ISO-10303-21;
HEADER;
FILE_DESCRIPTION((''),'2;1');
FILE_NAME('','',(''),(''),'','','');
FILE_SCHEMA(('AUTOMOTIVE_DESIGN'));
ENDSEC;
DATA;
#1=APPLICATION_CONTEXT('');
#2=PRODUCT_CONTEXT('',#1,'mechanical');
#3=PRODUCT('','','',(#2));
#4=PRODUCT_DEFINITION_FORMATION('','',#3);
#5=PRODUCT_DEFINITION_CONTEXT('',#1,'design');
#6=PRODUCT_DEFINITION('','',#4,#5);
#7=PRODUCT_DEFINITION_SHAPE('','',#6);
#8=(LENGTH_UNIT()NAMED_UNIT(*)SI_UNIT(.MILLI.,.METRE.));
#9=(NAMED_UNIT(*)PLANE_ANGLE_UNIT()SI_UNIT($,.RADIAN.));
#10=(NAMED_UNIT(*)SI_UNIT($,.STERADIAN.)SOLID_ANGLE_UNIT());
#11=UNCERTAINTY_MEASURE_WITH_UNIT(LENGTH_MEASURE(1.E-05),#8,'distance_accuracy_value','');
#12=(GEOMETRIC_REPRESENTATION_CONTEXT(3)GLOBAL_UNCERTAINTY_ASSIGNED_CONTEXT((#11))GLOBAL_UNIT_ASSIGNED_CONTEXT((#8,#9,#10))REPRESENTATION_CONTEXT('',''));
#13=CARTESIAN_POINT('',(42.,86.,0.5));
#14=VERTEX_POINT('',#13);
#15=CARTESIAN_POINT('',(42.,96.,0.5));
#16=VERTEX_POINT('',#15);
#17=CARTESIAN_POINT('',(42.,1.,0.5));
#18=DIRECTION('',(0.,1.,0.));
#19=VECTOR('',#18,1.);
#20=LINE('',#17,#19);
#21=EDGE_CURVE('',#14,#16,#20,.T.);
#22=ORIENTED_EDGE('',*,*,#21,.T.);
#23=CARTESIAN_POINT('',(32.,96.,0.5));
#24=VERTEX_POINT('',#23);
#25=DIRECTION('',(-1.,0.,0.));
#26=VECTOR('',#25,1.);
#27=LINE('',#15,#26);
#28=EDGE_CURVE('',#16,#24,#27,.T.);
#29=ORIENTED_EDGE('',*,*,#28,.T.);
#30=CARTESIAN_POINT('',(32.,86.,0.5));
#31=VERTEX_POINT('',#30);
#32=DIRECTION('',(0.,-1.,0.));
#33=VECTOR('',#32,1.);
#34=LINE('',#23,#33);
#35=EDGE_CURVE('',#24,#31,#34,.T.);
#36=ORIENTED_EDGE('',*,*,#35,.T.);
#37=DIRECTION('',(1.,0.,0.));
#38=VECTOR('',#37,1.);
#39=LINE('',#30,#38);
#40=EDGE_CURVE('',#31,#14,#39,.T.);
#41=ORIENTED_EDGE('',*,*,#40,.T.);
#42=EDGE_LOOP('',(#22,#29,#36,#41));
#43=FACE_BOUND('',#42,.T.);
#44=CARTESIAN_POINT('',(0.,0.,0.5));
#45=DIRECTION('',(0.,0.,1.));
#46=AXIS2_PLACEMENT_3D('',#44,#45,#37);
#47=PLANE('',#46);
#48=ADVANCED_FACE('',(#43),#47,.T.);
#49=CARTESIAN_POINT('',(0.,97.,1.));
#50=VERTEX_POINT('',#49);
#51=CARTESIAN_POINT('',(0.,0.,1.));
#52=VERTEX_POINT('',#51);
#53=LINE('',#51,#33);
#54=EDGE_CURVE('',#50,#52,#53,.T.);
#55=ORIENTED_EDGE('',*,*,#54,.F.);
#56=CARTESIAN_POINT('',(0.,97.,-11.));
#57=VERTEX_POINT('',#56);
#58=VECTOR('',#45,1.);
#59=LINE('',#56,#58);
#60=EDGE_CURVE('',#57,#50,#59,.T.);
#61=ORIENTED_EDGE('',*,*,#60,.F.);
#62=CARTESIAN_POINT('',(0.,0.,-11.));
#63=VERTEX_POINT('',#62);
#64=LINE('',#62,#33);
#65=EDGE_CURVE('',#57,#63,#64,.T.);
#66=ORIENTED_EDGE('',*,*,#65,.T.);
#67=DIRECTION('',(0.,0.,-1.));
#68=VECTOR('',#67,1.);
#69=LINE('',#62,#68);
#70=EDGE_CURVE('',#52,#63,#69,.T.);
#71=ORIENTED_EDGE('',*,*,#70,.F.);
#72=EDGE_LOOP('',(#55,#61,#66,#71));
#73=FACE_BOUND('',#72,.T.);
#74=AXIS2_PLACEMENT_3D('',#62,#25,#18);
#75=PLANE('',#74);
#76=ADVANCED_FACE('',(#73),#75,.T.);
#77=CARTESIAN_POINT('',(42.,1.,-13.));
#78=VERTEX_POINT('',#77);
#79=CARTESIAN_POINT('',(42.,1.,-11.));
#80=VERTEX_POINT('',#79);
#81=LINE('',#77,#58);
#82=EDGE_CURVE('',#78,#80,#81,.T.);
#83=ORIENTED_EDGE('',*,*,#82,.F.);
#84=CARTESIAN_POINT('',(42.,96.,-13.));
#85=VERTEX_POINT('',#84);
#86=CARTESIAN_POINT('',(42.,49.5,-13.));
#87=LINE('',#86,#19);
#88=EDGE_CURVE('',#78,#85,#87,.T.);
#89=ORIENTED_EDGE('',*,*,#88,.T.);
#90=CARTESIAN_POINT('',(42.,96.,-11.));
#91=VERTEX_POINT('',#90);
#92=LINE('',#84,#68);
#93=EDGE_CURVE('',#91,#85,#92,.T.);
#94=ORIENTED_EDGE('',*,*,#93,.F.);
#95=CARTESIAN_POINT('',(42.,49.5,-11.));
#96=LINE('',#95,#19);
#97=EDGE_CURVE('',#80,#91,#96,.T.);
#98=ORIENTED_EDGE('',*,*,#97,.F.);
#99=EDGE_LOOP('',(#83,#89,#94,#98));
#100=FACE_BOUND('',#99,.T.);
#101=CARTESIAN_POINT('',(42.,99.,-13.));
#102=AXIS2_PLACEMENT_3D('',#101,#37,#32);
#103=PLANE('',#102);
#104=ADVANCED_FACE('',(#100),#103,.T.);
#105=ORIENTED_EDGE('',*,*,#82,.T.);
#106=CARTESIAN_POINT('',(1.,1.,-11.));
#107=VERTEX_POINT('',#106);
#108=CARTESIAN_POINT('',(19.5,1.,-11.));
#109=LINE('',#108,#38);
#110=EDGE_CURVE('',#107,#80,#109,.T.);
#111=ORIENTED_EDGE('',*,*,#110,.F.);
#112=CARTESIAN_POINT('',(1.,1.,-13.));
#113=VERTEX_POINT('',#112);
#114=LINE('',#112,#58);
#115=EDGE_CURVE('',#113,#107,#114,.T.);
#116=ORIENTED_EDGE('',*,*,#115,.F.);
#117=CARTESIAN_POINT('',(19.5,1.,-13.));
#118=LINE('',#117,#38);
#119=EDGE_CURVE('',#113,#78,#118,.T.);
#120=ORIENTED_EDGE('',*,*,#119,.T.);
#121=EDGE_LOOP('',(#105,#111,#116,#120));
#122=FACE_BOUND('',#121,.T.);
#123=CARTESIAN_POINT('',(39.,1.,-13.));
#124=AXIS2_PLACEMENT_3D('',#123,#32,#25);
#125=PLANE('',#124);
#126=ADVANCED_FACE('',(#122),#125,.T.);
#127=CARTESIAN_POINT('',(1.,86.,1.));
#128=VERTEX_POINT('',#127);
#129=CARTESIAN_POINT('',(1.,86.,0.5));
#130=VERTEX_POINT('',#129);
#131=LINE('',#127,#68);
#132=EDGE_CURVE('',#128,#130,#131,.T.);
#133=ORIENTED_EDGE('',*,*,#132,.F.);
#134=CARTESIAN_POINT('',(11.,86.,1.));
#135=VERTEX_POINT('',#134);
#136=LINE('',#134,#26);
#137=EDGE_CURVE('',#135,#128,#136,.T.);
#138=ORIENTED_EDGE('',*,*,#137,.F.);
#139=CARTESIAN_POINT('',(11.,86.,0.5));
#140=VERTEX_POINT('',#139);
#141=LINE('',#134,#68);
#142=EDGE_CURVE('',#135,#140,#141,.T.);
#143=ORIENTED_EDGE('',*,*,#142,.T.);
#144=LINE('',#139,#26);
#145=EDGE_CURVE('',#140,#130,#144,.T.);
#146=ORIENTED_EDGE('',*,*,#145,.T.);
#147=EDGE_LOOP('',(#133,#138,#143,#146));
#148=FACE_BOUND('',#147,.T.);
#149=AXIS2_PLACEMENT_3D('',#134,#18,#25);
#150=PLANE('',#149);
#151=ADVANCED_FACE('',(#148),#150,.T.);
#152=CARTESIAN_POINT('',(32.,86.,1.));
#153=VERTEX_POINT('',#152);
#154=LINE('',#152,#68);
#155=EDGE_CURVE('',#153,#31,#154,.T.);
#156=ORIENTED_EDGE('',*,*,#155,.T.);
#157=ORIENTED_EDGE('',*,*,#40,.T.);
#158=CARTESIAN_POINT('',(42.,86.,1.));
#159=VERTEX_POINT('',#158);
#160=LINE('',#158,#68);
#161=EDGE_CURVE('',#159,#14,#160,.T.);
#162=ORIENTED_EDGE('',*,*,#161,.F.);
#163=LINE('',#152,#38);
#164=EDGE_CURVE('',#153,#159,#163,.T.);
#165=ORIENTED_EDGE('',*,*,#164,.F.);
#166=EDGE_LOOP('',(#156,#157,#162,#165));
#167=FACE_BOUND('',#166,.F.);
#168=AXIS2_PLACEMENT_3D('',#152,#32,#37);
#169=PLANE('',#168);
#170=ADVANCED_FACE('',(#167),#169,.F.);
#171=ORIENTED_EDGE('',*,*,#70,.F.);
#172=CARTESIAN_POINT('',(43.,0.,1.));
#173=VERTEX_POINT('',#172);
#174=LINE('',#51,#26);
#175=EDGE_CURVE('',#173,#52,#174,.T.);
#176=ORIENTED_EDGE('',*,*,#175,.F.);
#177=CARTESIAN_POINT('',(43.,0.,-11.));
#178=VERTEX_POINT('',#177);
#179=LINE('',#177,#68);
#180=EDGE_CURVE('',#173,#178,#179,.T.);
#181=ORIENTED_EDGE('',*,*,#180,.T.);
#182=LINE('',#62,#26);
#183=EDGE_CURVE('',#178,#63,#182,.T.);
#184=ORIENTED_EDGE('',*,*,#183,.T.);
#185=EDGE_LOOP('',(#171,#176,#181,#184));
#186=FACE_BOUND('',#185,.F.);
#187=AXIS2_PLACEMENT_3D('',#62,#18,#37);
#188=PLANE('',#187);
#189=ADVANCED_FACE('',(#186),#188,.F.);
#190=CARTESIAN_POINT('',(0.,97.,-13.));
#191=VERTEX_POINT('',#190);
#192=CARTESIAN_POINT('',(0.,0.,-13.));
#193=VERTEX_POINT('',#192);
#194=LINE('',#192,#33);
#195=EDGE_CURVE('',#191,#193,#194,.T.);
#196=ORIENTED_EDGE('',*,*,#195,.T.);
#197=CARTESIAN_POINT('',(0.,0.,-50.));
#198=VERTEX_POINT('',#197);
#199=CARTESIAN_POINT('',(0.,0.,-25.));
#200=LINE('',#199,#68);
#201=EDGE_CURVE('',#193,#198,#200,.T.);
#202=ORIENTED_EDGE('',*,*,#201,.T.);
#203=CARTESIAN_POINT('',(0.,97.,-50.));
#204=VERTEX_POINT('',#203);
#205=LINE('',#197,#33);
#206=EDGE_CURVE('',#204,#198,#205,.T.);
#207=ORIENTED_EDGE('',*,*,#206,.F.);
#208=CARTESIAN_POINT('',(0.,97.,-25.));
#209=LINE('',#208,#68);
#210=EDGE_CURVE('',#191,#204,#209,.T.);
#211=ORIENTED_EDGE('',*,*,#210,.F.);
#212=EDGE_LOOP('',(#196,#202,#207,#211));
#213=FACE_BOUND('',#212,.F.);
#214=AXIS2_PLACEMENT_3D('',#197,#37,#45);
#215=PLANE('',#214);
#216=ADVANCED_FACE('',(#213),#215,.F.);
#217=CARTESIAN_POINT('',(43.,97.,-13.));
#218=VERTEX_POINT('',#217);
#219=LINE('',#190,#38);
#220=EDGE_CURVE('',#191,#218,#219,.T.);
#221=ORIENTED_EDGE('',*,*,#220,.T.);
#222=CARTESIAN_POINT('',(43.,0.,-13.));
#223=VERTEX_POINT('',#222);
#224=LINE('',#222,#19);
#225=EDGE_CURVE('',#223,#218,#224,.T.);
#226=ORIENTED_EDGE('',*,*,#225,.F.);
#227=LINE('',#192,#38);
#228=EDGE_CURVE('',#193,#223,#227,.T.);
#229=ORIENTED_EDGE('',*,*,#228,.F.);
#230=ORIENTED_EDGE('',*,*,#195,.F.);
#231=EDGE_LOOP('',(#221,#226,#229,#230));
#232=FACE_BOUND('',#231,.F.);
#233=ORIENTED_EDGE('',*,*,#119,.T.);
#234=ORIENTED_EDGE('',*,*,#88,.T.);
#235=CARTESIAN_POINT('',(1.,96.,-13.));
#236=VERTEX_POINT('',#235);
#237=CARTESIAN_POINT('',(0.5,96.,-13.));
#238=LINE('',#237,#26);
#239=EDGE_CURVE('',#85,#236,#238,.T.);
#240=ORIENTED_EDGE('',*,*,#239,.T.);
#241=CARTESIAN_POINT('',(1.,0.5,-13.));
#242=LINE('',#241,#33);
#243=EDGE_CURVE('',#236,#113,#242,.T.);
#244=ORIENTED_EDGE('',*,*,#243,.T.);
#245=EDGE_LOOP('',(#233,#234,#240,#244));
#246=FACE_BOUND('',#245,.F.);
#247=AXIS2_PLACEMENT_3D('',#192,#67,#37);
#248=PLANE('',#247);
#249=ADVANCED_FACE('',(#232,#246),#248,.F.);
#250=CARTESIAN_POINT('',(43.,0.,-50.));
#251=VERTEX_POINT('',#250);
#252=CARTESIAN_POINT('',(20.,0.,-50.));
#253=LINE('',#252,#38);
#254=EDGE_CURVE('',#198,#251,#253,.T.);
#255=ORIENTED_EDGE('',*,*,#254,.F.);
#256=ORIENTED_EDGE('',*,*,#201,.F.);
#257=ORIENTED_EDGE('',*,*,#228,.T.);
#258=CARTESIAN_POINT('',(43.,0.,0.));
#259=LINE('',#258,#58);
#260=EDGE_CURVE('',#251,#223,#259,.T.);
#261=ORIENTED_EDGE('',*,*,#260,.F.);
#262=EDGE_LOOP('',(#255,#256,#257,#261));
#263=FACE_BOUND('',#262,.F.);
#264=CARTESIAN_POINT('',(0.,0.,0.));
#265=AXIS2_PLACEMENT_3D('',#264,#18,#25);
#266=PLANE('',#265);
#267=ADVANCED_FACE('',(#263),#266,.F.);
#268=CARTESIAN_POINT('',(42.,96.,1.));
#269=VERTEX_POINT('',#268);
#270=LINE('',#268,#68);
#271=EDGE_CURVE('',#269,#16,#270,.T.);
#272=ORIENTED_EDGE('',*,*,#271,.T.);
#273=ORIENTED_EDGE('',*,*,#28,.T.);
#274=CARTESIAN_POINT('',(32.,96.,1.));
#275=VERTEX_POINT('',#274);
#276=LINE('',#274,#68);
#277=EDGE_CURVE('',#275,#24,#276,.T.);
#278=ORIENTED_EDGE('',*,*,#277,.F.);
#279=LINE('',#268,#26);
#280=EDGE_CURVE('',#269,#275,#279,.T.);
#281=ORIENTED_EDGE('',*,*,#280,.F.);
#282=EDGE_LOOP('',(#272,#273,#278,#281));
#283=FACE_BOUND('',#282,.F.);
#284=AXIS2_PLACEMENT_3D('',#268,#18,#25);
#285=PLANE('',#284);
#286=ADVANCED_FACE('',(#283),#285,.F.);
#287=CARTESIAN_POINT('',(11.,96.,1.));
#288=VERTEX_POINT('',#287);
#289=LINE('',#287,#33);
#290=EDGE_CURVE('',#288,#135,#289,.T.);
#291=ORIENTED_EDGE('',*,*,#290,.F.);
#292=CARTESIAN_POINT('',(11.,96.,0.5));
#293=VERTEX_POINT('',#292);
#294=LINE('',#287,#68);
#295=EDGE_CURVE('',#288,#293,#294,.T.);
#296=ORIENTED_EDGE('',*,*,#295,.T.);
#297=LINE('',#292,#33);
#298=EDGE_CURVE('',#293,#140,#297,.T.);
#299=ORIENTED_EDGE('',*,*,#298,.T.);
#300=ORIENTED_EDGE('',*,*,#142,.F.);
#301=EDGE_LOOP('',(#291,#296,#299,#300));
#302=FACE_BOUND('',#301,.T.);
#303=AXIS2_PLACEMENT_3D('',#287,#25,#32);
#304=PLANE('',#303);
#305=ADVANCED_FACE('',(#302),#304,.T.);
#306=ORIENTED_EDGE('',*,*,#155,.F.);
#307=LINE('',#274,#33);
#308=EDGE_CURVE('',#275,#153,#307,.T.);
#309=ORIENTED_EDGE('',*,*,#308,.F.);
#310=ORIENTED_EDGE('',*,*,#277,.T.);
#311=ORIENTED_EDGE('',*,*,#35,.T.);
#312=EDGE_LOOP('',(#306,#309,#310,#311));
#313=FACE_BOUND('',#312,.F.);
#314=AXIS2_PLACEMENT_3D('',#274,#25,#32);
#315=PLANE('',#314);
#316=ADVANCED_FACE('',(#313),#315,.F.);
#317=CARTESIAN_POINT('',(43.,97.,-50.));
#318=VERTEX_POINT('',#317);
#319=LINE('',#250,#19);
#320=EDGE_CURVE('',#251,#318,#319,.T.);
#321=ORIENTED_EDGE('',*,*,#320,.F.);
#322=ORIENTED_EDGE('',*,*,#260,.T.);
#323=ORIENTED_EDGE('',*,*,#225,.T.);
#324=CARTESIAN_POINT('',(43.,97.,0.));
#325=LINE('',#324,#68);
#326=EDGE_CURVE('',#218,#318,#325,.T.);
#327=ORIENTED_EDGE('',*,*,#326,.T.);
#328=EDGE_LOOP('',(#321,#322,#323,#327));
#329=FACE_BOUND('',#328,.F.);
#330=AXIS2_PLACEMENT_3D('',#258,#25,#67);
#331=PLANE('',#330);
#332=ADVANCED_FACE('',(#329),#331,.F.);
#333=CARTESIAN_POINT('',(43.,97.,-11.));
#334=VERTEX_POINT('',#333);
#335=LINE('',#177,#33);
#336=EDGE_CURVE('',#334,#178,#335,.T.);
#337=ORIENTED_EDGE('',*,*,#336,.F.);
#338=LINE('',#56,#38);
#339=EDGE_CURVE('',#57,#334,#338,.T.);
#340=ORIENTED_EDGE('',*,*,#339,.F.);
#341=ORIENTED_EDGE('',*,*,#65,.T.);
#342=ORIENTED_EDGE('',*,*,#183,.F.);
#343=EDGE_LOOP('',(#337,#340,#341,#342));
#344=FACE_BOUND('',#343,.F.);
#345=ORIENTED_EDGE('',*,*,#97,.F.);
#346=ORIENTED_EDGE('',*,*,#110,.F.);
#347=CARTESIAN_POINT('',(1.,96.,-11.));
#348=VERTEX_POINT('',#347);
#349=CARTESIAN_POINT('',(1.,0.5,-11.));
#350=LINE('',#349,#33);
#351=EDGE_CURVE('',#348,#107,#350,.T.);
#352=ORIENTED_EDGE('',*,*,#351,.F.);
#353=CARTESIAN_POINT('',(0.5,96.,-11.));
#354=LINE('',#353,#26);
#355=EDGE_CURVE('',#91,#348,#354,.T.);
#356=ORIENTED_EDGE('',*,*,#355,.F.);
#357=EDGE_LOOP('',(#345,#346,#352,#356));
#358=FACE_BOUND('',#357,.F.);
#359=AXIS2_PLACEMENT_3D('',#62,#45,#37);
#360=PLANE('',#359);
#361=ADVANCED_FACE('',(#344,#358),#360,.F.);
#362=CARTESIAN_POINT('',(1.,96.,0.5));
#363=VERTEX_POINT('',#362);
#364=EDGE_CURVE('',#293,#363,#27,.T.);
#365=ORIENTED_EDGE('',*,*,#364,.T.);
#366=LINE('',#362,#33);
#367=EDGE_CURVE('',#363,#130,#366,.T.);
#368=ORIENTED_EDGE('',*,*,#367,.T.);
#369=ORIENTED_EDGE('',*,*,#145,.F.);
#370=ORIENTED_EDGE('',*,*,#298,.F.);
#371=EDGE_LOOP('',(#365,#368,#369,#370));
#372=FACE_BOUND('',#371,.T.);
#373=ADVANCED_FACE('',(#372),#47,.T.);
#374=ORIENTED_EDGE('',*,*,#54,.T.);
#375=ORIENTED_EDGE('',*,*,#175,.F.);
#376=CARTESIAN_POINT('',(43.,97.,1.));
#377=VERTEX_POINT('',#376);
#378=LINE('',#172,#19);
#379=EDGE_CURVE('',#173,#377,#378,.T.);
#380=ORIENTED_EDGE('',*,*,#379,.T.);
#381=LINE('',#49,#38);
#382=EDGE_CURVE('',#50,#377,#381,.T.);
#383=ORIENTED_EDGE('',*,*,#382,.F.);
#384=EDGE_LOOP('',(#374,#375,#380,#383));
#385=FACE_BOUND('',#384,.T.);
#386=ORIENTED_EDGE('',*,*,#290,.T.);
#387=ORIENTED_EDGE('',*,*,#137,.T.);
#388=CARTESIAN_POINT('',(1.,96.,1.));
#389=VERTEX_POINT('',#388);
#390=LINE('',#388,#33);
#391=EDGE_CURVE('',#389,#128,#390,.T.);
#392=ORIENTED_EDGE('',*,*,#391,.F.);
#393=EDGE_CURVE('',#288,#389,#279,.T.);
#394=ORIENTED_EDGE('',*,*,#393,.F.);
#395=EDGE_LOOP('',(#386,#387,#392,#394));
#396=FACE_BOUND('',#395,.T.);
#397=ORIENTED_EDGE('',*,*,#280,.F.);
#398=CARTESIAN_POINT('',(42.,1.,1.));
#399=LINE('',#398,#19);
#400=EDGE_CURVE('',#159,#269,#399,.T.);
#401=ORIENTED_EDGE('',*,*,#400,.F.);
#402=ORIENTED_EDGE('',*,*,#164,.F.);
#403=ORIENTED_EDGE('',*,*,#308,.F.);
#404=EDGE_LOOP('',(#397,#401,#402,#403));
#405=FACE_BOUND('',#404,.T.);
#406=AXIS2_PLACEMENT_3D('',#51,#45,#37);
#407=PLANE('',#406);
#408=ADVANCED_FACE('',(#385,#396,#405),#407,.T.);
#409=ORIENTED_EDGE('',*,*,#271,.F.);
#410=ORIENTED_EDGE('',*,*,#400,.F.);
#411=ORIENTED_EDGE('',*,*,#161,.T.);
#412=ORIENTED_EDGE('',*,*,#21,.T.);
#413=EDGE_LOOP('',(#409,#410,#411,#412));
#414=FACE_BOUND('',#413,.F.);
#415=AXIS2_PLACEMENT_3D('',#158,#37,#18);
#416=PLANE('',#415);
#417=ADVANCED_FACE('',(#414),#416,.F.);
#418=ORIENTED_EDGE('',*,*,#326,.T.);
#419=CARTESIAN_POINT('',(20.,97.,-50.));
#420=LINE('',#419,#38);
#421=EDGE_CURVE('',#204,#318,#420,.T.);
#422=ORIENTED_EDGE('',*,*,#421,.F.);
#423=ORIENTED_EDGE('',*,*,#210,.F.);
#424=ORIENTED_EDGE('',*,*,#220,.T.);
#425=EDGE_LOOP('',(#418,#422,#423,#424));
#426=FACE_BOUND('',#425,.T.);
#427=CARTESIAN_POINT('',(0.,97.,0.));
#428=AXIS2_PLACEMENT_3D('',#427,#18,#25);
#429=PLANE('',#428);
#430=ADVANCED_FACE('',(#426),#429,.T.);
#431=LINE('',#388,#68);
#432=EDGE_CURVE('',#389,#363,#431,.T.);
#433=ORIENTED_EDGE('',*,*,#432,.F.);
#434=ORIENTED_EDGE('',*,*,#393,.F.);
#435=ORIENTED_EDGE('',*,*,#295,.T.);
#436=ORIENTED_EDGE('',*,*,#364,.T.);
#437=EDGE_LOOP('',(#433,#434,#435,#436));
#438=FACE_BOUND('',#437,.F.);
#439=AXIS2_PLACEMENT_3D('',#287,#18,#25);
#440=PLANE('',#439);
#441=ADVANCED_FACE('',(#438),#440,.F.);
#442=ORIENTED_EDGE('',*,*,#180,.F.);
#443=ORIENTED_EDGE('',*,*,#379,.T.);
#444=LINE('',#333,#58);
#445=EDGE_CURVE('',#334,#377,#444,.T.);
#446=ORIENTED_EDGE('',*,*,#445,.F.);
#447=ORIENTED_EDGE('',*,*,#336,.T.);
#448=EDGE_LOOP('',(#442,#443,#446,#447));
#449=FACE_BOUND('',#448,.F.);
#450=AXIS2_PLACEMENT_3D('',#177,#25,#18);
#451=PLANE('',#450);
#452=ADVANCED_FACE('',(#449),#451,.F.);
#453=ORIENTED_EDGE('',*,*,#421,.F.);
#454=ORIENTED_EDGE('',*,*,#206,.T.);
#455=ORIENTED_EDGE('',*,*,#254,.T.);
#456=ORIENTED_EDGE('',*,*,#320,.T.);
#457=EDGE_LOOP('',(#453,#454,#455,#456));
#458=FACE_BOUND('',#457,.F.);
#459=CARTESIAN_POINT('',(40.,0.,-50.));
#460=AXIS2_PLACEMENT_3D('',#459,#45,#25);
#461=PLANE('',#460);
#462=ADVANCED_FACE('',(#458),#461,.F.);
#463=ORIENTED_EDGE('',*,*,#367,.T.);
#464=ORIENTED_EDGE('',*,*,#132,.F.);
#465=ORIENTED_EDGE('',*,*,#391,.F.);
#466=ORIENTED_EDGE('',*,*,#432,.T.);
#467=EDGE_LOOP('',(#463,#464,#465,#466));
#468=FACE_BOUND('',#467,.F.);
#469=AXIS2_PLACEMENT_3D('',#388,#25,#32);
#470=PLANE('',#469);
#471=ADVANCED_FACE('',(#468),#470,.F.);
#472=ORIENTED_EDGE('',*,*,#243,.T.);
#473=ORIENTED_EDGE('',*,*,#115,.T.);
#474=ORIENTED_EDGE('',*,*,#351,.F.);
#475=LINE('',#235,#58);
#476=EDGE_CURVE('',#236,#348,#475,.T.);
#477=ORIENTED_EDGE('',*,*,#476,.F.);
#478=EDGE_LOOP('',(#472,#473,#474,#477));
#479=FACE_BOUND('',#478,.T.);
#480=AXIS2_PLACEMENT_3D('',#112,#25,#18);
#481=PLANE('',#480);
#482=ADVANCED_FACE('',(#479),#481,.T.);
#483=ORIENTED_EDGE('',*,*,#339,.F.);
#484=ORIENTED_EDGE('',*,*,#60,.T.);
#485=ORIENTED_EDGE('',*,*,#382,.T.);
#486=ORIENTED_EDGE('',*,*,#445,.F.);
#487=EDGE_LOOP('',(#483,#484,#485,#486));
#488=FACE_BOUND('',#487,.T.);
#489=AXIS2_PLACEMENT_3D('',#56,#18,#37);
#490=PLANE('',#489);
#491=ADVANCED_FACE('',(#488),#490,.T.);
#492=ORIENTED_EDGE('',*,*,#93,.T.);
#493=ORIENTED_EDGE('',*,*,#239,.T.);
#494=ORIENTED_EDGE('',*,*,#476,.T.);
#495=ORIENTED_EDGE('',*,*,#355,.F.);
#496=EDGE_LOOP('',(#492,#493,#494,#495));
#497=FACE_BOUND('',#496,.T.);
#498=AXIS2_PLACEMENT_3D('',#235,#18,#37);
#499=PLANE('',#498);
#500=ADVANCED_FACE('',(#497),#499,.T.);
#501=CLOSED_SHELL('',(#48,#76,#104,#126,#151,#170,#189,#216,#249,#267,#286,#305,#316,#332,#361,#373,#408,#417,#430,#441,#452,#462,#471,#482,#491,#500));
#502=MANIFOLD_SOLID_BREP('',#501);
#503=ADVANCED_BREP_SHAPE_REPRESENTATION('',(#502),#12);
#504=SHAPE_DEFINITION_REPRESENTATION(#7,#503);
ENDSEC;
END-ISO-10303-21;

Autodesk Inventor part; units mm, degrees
ref_plane "YZ Plane" through (0, 0, 0) normal (1, 0, 0) x (0, 1, 0)
ref_plane "XZ Plane" through (0, 0, 0) normal (0, 1, 0) x (-1, 0, 0)
ref_plane "XY Plane" through (0, 0, 0) normal (0, 0, 1) x (1, 0, 0)
sketch "Sketch1" plane through (0, 0, 0) normal (0, 1, 0) x (-1, 0, 0)
  line L0 (0, 0) -> (-40, 0)
  line L1 (-40, 0) -> (-40, -50)
  line L2 (-40, -50) -> (0, -50)
  line L3 (0, -50) -> (0, 0)
  dimension "d0" = 40
  dimension "d1" = 50
extrude "Extrusion1" add sketch "Sketch1" along normal blind 100
move faces "Move1" translate (0, 0, -13) faces at (13.3333, 33.3333, 0)
sketch "Sketch2" plane through (0, 0, -13) normal (0, 0, 1) x (1, 0, 0)
  line L0 (0, 0) -> (40, 0) projected
  line L1 (40, 0) -> (40, 100) projected
  line L2 (0, 100) -> (40, 100) projected
  line L3 (0, 0) -> (0, 100) projected
  line L4 (39, 99) -> (39, 1)
  line L5 (39, 1) -> (1, 1)
  line L6 (1, 1) -> (1, 99)
  line L7 (1, 99) -> (39, 99)
  dimension "d7" = 1
extrude "Extrusion2" add sketch "Sketch2" along normal blind 2 contours L4 L5 L6 L7
sketch "Sketch3" plane through (0, 0, -11) normal (0, 0, 1) x (1, 0, 0)
  line L0 (0, 100) -> (40, 100) projected
  line L1 (0, 0) -> (0, 100) projected
  line L2 (40, 0) -> (40, 100) projected
  line L3 (0, 0) -> (40, 0) projected
extrude "Extrusion3" add sketch "Sketch3" along normal blind 12
move faces "Move2" translate (3, 0, 0) faces at (40, 66.6667, -37.6667) (39, 33.6667, -12.3333) (40, 33.3333, -7)
move faces "Move3" translate (0, -3, 0) faces at (28.6667, 100, -25.3333) (14.6667, 99, -11.6667) (14.3333, 100, -3)
sketch "Sketch4" plane through (0, 0, 1) normal (0, 0, 1) x (1, 0, 0)
  line L0 (0, 97) -> (0, 0) projected
  line L1 (0, 0) -> (43, 0) projected
  line L2 (43, 0) -> (43, 97) projected
  line L3 (43, 97) -> (0, 97) projected
  line L4 (1, 96) -> (1, 1)
  line L5 (1, 1) -> (42, 1)
  line L6 (42, 1) -> (42, 96)
  line L7 (42, 96) -> (1, 96)
  line L8 (1, 96) -> (42, 96) projected
  line L9 (1, 96) -> (11, 96)
  line L10 (11, 96) -> (11, 86)
  line L11 (11, 86) -> (1, 86)
  line L12 (1, 86) -> (1, 96)
  line L13 (42, 96) -> (32, 96)
  line L14 (32, 96) -> (32, 86)
  line L15 (32, 86) -> (42, 86)
  line L16 (42, 86) -> (42, 96)
  dimension "d18" = 1
  dimension "d19" = 10
  dimension "d20" = 10
  dimension "d21" = 10
  dimension "d22" = 10
extrude "Extrusion4" cut sketch "Sketch4" against normal blind 0.5 contours L7 L10 L11 L4 | L7 L6 L15 L14
ref_plane "Work Plane1" through (0, 48.5, 0) normal (0, -1, 0) x (1, 0, 0)
equation "\"d22\" = d20"
properties part number "1.4AH SLAB"
